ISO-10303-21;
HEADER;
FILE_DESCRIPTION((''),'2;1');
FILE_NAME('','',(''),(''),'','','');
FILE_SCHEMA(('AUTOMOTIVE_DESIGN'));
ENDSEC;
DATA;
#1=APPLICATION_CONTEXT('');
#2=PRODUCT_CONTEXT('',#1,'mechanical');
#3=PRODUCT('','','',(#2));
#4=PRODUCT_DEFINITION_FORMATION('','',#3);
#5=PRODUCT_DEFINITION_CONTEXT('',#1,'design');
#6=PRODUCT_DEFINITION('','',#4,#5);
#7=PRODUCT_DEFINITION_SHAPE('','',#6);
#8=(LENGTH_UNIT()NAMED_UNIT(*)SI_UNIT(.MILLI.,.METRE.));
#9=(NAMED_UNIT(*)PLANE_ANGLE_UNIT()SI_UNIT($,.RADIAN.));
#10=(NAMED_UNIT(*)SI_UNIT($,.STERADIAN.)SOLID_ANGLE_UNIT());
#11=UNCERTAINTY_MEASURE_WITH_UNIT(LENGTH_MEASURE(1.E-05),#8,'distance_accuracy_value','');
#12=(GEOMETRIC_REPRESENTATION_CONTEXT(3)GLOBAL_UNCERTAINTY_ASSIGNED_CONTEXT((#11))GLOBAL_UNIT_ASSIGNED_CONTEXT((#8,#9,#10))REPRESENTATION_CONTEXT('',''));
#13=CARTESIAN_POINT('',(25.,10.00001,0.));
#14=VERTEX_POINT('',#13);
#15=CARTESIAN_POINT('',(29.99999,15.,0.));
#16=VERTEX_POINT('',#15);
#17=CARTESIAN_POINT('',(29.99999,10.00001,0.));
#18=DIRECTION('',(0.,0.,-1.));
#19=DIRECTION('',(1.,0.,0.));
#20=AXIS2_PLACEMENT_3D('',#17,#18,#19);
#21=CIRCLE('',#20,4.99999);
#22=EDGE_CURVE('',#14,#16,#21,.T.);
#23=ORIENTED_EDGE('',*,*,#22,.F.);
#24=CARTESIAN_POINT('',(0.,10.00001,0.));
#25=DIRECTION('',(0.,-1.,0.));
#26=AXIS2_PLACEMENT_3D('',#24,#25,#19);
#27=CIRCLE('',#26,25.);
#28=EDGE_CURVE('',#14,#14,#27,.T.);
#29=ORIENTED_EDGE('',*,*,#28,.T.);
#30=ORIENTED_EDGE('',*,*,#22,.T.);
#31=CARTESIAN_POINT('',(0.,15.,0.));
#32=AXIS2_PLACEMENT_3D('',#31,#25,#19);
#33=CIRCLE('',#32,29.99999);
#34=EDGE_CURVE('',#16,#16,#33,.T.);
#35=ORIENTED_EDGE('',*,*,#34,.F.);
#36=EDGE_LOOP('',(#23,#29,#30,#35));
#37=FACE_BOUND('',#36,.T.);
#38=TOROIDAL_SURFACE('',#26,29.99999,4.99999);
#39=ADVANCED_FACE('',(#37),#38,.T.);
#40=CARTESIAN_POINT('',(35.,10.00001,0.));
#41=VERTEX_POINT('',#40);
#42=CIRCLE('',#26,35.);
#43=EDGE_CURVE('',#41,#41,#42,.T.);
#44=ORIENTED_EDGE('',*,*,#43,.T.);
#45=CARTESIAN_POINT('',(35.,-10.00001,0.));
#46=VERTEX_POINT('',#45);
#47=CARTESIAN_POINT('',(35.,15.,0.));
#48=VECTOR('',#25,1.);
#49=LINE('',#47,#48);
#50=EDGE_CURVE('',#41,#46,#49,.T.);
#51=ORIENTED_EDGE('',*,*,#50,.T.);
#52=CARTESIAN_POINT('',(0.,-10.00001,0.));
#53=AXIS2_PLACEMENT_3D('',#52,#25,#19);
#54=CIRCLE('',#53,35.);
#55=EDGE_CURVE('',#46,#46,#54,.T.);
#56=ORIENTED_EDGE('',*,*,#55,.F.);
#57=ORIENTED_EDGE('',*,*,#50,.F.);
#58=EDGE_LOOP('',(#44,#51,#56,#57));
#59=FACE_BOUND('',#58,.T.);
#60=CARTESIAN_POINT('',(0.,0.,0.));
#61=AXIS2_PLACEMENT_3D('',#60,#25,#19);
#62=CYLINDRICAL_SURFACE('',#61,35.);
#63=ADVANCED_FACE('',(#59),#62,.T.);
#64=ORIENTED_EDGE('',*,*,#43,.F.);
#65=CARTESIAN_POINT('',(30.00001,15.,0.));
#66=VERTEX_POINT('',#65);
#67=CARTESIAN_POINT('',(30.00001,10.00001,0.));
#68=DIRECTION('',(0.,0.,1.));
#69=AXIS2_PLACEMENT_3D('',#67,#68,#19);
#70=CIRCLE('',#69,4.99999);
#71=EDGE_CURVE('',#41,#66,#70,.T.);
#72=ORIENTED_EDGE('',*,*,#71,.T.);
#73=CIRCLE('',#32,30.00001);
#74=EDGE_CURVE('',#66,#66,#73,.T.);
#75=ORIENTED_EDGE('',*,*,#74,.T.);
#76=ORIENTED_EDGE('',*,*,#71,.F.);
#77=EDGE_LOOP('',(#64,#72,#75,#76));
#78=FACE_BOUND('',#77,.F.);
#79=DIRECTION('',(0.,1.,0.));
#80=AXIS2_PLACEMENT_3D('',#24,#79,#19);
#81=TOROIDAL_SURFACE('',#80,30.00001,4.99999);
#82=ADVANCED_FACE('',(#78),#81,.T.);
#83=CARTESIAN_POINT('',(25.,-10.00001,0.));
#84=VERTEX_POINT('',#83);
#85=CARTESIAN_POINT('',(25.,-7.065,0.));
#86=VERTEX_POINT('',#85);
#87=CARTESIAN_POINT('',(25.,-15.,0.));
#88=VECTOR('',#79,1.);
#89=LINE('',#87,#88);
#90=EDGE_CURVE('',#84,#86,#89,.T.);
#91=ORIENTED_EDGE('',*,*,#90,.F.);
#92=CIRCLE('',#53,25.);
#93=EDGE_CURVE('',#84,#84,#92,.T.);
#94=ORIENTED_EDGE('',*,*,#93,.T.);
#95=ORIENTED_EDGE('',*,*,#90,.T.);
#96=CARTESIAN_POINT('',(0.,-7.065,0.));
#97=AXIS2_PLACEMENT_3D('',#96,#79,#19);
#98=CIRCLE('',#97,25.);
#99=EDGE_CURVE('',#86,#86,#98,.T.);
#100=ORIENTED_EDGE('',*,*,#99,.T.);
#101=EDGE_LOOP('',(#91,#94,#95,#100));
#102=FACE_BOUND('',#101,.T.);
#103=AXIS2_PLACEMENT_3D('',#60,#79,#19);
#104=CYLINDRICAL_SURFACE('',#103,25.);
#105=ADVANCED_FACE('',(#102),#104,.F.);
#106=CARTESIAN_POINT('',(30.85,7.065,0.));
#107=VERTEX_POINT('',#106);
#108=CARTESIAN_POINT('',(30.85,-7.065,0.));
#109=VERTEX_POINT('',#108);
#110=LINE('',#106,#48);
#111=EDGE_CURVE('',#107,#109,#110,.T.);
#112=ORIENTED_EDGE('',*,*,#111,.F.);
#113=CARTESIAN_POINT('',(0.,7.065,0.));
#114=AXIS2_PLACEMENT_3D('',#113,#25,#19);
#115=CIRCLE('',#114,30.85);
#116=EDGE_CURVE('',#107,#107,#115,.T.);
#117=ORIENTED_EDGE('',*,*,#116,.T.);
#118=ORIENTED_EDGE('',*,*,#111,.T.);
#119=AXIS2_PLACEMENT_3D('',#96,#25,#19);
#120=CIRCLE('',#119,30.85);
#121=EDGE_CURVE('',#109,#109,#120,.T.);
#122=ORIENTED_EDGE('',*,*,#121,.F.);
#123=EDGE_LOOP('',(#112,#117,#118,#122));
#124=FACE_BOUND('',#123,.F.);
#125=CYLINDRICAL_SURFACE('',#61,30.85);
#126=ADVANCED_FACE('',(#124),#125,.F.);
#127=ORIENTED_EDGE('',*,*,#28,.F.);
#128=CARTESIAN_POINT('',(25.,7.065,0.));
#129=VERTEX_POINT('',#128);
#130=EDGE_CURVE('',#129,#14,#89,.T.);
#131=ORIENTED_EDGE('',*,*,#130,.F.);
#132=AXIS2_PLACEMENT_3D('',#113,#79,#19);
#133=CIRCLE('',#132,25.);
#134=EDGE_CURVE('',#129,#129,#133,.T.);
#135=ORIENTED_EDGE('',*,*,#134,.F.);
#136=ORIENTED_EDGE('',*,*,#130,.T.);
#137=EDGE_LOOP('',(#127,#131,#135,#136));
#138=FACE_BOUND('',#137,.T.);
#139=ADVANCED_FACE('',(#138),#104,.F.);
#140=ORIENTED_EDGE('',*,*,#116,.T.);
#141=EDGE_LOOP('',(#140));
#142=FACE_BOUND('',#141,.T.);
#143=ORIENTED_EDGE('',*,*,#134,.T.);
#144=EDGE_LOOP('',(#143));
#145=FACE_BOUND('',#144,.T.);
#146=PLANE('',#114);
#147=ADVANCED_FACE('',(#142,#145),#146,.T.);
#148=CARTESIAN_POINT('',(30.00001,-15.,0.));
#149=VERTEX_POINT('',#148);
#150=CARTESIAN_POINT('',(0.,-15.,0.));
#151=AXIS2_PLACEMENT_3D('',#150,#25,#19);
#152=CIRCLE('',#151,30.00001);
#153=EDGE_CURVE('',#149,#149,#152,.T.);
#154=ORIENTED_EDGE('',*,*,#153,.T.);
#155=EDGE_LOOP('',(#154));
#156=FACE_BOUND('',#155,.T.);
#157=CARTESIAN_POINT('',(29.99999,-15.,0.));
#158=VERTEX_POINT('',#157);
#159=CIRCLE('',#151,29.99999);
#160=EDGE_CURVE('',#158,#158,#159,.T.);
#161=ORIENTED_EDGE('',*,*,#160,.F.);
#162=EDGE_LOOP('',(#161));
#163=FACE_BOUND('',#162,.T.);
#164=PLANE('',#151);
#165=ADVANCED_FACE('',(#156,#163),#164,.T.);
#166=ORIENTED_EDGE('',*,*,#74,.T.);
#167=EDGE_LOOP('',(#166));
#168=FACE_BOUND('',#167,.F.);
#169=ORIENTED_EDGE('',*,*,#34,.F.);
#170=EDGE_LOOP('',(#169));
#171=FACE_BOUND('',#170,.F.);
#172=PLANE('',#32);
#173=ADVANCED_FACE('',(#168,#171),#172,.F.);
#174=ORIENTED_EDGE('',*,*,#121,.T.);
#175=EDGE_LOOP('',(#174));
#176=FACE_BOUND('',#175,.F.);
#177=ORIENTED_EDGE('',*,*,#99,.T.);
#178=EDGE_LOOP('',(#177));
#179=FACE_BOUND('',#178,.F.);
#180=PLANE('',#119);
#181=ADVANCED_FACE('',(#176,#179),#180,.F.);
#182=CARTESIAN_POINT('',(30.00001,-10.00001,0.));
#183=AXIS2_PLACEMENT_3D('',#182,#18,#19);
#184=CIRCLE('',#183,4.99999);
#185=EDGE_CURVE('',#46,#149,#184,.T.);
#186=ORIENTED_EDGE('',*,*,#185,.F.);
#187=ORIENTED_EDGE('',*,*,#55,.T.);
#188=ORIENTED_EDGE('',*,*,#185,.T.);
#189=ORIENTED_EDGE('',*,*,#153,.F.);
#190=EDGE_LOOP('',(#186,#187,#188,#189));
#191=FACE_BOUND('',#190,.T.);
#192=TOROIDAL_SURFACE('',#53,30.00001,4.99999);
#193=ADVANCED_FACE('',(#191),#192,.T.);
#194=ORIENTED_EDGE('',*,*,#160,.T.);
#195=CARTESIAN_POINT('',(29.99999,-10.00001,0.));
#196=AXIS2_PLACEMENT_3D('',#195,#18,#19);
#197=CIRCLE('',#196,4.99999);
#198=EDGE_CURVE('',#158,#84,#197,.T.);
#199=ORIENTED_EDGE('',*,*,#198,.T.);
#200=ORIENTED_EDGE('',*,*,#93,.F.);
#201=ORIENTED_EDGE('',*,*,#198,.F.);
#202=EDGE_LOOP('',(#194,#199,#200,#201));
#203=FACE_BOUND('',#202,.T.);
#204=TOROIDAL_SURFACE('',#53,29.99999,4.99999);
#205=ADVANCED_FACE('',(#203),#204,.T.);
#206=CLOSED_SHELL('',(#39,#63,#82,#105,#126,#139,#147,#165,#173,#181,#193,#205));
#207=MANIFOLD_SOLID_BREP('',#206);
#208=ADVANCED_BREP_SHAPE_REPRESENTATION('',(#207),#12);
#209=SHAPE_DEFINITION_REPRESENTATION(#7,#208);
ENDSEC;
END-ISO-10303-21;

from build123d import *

# Parameters (mm, degrees)
F0_R     = 35
F0_R_2   = 25
F1_DEPTH = 15
F2_R     = 4.99999
F3_R     = 30.85
F3_R_2   = 25.79
F4_DEPTH = 7.065


# Not quite as in the source:
# - a fillet or chamfer is up to 0.001 mm smaller than in the source, because OpenCascade refuses the exact size


with BuildPart() as f1:
    # F0 (on Front) → F1 (new body, symmetric)
    with BuildSketch(Plane.XZ):
        Circle(F0_R)
        Circle(F0_R_2, mode=Mode.SUBTRACT)
    extrude(amount=F1_DEPTH, both=True)

    # F2 (radius 5 in the source; OpenCascade refuses exactly that, so slightly less here)
    f2_edges = [f1.edges().sort_by_distance(p)[0] for p in [
        (-35, -15, 0),
        (-25, -15, 0),
        (-35, 15, 0),
        (-25, 15, 0),
    ]]
    fillet(f2_edges, radius=F2_R)

    # F3 (on Front) → F4 (cut, symmetric)
    with BuildSketch(Plane.XZ):
        Circle(F3_R)
        Circle(F3_R_2, mode=Mode.SUBTRACT)
        Circle(F3_R_2)
    extrude(amount=F4_DEPTH, both=True, mode=Mode.SUBTRACT)


solid = f1.part
